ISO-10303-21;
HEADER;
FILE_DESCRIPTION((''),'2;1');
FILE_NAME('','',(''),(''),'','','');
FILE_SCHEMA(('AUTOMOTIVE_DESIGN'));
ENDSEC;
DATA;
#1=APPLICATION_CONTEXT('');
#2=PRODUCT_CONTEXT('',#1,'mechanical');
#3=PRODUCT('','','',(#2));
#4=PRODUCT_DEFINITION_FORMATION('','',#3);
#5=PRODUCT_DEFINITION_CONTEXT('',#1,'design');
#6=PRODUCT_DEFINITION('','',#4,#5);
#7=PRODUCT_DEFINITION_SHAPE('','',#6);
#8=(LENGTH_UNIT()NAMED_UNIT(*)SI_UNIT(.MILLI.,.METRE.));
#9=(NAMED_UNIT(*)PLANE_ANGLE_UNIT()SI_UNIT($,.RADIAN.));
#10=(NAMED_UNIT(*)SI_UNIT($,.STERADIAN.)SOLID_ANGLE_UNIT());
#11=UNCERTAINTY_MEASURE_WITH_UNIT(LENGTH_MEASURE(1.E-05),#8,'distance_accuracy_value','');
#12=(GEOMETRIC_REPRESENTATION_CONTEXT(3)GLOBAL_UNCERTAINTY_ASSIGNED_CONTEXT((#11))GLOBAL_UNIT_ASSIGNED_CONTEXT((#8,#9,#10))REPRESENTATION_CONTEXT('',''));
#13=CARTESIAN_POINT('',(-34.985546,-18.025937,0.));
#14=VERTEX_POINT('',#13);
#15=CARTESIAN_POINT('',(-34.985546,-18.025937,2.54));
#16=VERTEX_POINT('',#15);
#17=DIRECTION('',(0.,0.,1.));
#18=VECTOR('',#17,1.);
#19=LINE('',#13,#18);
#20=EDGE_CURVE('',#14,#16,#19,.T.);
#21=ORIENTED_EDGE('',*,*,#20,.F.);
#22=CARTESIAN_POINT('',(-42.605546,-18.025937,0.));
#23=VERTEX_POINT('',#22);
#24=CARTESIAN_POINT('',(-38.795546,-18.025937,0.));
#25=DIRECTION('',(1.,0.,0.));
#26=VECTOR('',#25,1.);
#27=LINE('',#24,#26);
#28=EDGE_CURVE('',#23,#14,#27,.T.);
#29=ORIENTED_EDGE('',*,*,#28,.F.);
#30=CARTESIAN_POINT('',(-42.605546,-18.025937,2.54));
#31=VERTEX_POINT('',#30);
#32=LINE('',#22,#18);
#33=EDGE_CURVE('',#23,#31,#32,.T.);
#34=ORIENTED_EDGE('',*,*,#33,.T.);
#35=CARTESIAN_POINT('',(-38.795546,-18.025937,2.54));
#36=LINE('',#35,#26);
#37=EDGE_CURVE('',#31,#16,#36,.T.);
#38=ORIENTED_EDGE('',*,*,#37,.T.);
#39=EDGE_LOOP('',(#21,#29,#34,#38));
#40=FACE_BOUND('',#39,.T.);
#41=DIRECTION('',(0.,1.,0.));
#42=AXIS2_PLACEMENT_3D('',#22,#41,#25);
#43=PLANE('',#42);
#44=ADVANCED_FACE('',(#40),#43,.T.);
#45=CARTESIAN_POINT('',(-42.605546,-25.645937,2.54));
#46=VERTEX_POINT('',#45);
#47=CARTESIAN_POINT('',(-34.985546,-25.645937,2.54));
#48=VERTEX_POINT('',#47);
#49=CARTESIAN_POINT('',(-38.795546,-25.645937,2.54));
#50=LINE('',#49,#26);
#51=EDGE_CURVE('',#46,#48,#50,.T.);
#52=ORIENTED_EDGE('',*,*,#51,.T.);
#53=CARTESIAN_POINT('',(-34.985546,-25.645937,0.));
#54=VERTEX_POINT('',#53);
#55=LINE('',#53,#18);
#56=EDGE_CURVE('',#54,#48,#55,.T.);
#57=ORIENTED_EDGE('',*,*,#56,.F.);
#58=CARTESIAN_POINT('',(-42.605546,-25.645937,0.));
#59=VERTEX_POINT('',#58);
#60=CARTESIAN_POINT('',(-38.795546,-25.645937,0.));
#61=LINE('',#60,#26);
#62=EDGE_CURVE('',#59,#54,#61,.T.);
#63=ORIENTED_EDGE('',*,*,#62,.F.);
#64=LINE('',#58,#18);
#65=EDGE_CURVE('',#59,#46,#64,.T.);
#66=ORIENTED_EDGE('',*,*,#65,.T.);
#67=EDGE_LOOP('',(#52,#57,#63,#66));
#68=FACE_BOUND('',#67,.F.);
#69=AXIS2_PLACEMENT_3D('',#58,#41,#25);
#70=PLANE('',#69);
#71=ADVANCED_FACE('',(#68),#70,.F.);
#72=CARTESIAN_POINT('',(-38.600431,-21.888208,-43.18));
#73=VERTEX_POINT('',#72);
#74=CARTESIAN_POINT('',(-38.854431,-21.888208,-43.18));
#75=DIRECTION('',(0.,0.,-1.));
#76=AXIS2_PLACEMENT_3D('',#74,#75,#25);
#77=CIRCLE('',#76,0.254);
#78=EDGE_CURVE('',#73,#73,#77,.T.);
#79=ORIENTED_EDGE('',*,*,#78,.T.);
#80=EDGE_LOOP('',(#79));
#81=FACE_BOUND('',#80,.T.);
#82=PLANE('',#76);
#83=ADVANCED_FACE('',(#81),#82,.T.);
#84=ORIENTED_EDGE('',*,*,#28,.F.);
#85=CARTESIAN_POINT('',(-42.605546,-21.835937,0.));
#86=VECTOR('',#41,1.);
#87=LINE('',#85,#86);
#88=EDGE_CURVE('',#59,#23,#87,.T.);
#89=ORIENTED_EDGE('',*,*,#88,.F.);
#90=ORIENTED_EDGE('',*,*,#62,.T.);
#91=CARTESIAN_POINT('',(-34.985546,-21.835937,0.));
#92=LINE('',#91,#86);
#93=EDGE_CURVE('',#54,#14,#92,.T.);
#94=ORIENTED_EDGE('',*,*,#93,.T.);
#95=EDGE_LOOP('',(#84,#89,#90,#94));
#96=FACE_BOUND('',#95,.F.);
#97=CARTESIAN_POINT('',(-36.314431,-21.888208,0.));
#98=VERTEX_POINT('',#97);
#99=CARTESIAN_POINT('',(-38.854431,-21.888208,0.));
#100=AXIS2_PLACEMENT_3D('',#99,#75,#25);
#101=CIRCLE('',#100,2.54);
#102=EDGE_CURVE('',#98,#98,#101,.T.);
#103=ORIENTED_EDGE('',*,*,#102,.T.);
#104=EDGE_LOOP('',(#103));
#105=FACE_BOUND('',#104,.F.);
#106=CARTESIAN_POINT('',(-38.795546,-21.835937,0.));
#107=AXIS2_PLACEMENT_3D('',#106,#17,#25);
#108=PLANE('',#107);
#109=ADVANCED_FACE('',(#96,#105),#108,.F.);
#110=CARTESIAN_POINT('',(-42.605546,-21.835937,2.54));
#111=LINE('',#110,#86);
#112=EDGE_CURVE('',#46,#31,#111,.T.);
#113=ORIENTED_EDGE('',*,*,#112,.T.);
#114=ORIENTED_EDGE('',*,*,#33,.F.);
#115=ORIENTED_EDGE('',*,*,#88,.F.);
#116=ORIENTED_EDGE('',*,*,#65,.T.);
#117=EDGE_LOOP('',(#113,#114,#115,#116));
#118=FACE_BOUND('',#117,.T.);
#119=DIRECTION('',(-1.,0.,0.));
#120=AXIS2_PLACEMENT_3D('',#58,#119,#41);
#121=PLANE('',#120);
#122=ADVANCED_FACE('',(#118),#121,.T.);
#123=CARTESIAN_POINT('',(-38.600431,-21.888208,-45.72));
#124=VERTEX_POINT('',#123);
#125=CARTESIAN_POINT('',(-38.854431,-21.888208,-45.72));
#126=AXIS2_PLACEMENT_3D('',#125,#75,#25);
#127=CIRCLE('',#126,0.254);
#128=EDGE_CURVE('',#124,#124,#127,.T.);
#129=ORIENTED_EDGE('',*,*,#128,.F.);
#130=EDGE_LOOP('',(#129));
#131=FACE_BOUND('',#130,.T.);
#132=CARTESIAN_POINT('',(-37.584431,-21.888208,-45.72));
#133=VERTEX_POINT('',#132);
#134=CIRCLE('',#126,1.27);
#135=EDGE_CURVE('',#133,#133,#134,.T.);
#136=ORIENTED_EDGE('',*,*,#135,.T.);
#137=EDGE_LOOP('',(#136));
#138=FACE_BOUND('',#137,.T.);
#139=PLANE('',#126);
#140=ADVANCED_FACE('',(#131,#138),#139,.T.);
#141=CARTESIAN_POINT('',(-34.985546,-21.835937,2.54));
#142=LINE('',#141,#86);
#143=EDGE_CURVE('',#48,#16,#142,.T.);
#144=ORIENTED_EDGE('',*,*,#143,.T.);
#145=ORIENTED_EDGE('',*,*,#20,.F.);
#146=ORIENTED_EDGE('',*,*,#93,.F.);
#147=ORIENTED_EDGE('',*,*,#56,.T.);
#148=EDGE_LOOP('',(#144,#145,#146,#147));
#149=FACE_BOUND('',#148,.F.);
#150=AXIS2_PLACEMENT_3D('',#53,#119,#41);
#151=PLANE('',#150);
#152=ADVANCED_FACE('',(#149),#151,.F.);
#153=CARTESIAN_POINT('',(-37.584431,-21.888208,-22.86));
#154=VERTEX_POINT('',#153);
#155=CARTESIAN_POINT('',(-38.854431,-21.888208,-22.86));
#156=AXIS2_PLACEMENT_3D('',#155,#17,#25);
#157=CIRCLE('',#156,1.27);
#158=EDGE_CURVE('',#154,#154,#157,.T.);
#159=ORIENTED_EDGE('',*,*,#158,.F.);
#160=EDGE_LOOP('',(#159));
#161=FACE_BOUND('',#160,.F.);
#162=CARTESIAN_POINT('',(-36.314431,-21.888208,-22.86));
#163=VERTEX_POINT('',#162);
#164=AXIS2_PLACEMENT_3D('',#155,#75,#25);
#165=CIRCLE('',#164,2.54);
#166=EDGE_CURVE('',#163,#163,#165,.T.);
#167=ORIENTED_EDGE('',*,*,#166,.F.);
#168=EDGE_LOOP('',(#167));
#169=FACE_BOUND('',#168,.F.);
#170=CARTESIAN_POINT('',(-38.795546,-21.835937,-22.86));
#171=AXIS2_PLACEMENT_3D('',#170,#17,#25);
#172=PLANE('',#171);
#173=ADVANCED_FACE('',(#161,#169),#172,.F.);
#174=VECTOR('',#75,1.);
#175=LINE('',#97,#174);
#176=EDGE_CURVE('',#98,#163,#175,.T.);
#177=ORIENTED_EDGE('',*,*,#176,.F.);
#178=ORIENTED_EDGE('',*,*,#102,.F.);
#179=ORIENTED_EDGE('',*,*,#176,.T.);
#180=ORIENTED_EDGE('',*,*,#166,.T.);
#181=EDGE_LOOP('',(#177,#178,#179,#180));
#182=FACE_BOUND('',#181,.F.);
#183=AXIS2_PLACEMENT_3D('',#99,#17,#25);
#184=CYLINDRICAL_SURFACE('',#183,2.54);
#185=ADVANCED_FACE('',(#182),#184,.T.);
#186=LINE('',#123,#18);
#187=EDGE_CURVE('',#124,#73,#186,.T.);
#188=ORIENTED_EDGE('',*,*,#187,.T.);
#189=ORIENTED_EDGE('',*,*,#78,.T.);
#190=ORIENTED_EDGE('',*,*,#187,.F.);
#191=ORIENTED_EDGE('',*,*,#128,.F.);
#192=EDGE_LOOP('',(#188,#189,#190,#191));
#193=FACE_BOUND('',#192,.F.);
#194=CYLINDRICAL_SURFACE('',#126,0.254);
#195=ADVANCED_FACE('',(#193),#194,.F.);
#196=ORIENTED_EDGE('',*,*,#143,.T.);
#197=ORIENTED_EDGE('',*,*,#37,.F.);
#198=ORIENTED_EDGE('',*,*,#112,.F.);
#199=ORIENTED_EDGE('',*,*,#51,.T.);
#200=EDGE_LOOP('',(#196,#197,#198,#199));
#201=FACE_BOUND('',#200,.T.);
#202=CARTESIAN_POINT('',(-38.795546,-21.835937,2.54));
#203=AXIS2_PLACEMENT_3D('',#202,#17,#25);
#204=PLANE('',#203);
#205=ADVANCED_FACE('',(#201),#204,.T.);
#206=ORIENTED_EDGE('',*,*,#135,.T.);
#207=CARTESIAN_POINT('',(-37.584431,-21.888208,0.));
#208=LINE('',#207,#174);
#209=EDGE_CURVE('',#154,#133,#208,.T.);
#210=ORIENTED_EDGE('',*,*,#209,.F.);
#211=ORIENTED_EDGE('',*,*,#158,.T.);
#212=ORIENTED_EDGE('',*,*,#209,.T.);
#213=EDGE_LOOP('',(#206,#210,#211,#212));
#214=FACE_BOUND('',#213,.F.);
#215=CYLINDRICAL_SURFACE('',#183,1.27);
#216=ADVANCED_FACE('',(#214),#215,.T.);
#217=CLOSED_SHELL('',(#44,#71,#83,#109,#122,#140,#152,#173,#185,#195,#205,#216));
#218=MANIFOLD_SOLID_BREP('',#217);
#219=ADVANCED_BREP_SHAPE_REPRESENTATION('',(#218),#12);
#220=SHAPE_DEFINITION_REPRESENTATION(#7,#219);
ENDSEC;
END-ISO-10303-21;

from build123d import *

# Parameters (mm, degrees)
F0_W     = 7.62
F0_H     = 7.62
F1_DEPTH = 2.54
F2_R     = 2.54
F2_R_2   = 1.27
F3_DEPTH = 22.86
F4_DEPTH = 22.86
F5_DEPTH = 45.72
F6_R     = 0.254
F7_DEPTH = 2.54


# Not quite as in the source:
# - a feature names something its author has since deleted; it is built from what else it names


with BuildPart() as f1:
    # F0 (on Top) → F1 (new body)
    with BuildSketch(Plane.XY):
        with Locations((-38.7955456972, -21.8359371471)):
            Rectangle(F0_W, F0_H)
    extrude(amount=F1_DEPTH)

    # F2 (on face) → F3 (join)
    with BuildSketch(Plane(origin=(0, 0, 0), x_dir=(1, 0, 0), z_dir=(0, 0, -1))):
        with Locations((-38.854431361, 21.8882076442)):
            Circle(F2_R)
        with Locations((-38.854431361, 21.8882076442)):
            Circle(F2_R_2, mode=Mode.SUBTRACT)
    extrude(amount=F3_DEPTH)

    # F4 (add): a face of the model
    f4_faces = [f1.faces().sort_by_distance(p)[0] for p in [
        (-38.854431361, -21.8882076442, 0),
    ]]
    extrude(f4_faces, amount=F4_DEPTH)

    # F2 (on face) → F5 (join)
    with BuildSketch(Plane(origin=(0, 0, 0), x_dir=(1, 0, 0), z_dir=(0, 0, -1))):
        with Locations((-38.854431361, 21.8882076442)):
            Circle(F2_R_2)
    extrude(amount=F5_DEPTH)

    # F6 (on face) → F7 (cut)
    with BuildSketch(Plane(origin=(0, 0, -45.72), x_dir=(1, 0, 0), z_dir=(0, 0, -1))):
        with Locations((-38.854431361, 21.8882076442)):
            Circle(F6_R)
    extrude(amount=-F7_DEPTH, mode=Mode.SUBTRACT)


solid = f1.part
